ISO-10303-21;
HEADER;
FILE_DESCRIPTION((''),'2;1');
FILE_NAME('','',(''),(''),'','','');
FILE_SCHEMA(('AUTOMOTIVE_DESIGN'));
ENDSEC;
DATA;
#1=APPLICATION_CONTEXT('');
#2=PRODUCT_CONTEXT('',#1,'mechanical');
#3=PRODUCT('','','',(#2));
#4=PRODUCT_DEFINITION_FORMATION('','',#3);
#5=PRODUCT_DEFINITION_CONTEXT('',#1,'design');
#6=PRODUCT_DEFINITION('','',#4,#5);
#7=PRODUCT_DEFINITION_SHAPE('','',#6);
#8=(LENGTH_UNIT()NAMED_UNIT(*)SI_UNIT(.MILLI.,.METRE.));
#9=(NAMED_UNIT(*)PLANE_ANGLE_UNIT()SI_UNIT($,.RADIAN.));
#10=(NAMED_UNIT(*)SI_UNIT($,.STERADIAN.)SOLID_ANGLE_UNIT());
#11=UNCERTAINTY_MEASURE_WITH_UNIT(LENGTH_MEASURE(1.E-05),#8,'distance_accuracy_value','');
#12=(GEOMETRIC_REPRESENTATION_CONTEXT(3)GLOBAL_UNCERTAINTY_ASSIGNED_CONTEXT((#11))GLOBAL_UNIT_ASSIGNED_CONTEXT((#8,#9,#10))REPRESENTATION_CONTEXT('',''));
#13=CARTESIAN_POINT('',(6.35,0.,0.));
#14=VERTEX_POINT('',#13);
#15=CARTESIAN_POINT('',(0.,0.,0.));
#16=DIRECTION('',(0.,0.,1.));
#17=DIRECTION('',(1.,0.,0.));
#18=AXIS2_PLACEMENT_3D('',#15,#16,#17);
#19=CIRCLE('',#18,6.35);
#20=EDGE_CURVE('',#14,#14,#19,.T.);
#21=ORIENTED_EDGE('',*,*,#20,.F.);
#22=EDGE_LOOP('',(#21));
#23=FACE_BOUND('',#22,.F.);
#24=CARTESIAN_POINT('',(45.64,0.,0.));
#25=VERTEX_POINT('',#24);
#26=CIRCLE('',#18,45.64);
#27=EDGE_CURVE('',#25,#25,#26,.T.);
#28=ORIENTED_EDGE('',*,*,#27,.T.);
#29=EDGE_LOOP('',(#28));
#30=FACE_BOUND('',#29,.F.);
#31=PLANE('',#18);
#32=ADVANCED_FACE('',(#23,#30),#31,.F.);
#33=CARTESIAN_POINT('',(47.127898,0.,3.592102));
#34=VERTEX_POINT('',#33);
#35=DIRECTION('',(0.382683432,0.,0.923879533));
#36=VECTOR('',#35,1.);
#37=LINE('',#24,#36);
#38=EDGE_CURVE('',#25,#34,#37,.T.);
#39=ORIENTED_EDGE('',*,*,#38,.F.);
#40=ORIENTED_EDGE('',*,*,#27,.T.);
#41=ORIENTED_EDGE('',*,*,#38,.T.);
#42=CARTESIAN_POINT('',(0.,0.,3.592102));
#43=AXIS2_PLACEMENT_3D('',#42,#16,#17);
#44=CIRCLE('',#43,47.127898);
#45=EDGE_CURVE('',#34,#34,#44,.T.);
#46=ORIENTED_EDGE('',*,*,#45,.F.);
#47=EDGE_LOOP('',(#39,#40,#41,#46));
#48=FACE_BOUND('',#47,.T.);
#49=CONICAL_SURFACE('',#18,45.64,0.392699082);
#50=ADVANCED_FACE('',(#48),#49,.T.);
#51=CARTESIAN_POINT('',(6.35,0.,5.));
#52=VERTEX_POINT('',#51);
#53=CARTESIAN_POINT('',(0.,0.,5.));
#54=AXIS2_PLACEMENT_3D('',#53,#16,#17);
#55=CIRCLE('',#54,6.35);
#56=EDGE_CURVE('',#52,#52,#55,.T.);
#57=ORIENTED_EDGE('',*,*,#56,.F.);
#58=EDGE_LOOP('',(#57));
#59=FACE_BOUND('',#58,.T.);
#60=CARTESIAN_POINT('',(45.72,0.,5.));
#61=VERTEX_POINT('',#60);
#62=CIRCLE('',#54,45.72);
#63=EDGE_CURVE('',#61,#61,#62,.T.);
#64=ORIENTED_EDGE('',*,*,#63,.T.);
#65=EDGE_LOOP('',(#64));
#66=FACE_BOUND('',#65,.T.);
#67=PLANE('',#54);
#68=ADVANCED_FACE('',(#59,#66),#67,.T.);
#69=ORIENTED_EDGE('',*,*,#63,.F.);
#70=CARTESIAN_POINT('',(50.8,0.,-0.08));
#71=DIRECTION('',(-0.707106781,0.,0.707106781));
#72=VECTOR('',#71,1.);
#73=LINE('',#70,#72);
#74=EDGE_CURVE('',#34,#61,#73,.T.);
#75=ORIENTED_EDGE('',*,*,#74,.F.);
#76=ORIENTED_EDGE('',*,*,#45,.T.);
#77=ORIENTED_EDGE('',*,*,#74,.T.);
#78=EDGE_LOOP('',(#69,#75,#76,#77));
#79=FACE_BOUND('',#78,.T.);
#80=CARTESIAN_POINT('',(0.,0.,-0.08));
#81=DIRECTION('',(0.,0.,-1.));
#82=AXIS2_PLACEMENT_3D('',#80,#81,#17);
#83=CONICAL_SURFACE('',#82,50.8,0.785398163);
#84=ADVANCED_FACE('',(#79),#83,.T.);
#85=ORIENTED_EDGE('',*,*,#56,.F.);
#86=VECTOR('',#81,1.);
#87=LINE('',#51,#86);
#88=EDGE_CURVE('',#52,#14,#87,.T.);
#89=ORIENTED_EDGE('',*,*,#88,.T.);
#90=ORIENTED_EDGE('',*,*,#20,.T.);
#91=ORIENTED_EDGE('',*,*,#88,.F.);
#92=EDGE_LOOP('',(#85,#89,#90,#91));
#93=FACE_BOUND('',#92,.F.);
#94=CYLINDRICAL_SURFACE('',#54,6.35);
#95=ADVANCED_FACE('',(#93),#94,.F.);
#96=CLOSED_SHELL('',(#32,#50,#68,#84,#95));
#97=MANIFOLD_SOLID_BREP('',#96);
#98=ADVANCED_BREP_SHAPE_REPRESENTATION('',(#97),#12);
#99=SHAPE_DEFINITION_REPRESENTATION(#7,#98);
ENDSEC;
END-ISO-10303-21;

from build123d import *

# Parameters (mm, degrees)
F0_R     = 50.8
F1_DEPTH = 5
F2_R     = 6.35
F3_DEPTH = 5.001
F5_SIZE  = 5.08


# Not quite as in the source:
# - a fillet or chamfer that OpenCascade refuses, or shapes differently, is made with other operations: its cross-section is extruded or revolved along the edge and cut away or added


with BuildPart() as f1:
    # F0 (on Top) → F1 (new body)
    with BuildSketch(Plane.XY):
        Circle(F0_R)
    extrude(amount=F1_DEPTH)

    # F2 (on face) → F3 (cut, through all)
    with BuildSketch(Plane.XY.offset(5)):
        Circle(F2_R)
    extrude(amount=-F3_DEPTH, mode=Mode.SUBTRACT)

    # F4: chamfer of 5.08 on 1 edges, made by hand

    # F4_s1 → F4_t2 (revolve, cut)
    with BuildSketch(Plane.XZ):
        Polygon((50.8, -0.08), (45.72, 5), (50.8, 5), align=None)
    revolve(axis=Axis((0, 0, 5), (0, 0, 1)), mode=Mode.SUBTRACT)

    # F5
    f5_edges = [f1.edges().sort_by_distance(p)[0] for p in [
        (-50.72, 0, 0),
    ]]
    chamfer(f5_edges, length=F5_SIZE)


solid = f1.part
